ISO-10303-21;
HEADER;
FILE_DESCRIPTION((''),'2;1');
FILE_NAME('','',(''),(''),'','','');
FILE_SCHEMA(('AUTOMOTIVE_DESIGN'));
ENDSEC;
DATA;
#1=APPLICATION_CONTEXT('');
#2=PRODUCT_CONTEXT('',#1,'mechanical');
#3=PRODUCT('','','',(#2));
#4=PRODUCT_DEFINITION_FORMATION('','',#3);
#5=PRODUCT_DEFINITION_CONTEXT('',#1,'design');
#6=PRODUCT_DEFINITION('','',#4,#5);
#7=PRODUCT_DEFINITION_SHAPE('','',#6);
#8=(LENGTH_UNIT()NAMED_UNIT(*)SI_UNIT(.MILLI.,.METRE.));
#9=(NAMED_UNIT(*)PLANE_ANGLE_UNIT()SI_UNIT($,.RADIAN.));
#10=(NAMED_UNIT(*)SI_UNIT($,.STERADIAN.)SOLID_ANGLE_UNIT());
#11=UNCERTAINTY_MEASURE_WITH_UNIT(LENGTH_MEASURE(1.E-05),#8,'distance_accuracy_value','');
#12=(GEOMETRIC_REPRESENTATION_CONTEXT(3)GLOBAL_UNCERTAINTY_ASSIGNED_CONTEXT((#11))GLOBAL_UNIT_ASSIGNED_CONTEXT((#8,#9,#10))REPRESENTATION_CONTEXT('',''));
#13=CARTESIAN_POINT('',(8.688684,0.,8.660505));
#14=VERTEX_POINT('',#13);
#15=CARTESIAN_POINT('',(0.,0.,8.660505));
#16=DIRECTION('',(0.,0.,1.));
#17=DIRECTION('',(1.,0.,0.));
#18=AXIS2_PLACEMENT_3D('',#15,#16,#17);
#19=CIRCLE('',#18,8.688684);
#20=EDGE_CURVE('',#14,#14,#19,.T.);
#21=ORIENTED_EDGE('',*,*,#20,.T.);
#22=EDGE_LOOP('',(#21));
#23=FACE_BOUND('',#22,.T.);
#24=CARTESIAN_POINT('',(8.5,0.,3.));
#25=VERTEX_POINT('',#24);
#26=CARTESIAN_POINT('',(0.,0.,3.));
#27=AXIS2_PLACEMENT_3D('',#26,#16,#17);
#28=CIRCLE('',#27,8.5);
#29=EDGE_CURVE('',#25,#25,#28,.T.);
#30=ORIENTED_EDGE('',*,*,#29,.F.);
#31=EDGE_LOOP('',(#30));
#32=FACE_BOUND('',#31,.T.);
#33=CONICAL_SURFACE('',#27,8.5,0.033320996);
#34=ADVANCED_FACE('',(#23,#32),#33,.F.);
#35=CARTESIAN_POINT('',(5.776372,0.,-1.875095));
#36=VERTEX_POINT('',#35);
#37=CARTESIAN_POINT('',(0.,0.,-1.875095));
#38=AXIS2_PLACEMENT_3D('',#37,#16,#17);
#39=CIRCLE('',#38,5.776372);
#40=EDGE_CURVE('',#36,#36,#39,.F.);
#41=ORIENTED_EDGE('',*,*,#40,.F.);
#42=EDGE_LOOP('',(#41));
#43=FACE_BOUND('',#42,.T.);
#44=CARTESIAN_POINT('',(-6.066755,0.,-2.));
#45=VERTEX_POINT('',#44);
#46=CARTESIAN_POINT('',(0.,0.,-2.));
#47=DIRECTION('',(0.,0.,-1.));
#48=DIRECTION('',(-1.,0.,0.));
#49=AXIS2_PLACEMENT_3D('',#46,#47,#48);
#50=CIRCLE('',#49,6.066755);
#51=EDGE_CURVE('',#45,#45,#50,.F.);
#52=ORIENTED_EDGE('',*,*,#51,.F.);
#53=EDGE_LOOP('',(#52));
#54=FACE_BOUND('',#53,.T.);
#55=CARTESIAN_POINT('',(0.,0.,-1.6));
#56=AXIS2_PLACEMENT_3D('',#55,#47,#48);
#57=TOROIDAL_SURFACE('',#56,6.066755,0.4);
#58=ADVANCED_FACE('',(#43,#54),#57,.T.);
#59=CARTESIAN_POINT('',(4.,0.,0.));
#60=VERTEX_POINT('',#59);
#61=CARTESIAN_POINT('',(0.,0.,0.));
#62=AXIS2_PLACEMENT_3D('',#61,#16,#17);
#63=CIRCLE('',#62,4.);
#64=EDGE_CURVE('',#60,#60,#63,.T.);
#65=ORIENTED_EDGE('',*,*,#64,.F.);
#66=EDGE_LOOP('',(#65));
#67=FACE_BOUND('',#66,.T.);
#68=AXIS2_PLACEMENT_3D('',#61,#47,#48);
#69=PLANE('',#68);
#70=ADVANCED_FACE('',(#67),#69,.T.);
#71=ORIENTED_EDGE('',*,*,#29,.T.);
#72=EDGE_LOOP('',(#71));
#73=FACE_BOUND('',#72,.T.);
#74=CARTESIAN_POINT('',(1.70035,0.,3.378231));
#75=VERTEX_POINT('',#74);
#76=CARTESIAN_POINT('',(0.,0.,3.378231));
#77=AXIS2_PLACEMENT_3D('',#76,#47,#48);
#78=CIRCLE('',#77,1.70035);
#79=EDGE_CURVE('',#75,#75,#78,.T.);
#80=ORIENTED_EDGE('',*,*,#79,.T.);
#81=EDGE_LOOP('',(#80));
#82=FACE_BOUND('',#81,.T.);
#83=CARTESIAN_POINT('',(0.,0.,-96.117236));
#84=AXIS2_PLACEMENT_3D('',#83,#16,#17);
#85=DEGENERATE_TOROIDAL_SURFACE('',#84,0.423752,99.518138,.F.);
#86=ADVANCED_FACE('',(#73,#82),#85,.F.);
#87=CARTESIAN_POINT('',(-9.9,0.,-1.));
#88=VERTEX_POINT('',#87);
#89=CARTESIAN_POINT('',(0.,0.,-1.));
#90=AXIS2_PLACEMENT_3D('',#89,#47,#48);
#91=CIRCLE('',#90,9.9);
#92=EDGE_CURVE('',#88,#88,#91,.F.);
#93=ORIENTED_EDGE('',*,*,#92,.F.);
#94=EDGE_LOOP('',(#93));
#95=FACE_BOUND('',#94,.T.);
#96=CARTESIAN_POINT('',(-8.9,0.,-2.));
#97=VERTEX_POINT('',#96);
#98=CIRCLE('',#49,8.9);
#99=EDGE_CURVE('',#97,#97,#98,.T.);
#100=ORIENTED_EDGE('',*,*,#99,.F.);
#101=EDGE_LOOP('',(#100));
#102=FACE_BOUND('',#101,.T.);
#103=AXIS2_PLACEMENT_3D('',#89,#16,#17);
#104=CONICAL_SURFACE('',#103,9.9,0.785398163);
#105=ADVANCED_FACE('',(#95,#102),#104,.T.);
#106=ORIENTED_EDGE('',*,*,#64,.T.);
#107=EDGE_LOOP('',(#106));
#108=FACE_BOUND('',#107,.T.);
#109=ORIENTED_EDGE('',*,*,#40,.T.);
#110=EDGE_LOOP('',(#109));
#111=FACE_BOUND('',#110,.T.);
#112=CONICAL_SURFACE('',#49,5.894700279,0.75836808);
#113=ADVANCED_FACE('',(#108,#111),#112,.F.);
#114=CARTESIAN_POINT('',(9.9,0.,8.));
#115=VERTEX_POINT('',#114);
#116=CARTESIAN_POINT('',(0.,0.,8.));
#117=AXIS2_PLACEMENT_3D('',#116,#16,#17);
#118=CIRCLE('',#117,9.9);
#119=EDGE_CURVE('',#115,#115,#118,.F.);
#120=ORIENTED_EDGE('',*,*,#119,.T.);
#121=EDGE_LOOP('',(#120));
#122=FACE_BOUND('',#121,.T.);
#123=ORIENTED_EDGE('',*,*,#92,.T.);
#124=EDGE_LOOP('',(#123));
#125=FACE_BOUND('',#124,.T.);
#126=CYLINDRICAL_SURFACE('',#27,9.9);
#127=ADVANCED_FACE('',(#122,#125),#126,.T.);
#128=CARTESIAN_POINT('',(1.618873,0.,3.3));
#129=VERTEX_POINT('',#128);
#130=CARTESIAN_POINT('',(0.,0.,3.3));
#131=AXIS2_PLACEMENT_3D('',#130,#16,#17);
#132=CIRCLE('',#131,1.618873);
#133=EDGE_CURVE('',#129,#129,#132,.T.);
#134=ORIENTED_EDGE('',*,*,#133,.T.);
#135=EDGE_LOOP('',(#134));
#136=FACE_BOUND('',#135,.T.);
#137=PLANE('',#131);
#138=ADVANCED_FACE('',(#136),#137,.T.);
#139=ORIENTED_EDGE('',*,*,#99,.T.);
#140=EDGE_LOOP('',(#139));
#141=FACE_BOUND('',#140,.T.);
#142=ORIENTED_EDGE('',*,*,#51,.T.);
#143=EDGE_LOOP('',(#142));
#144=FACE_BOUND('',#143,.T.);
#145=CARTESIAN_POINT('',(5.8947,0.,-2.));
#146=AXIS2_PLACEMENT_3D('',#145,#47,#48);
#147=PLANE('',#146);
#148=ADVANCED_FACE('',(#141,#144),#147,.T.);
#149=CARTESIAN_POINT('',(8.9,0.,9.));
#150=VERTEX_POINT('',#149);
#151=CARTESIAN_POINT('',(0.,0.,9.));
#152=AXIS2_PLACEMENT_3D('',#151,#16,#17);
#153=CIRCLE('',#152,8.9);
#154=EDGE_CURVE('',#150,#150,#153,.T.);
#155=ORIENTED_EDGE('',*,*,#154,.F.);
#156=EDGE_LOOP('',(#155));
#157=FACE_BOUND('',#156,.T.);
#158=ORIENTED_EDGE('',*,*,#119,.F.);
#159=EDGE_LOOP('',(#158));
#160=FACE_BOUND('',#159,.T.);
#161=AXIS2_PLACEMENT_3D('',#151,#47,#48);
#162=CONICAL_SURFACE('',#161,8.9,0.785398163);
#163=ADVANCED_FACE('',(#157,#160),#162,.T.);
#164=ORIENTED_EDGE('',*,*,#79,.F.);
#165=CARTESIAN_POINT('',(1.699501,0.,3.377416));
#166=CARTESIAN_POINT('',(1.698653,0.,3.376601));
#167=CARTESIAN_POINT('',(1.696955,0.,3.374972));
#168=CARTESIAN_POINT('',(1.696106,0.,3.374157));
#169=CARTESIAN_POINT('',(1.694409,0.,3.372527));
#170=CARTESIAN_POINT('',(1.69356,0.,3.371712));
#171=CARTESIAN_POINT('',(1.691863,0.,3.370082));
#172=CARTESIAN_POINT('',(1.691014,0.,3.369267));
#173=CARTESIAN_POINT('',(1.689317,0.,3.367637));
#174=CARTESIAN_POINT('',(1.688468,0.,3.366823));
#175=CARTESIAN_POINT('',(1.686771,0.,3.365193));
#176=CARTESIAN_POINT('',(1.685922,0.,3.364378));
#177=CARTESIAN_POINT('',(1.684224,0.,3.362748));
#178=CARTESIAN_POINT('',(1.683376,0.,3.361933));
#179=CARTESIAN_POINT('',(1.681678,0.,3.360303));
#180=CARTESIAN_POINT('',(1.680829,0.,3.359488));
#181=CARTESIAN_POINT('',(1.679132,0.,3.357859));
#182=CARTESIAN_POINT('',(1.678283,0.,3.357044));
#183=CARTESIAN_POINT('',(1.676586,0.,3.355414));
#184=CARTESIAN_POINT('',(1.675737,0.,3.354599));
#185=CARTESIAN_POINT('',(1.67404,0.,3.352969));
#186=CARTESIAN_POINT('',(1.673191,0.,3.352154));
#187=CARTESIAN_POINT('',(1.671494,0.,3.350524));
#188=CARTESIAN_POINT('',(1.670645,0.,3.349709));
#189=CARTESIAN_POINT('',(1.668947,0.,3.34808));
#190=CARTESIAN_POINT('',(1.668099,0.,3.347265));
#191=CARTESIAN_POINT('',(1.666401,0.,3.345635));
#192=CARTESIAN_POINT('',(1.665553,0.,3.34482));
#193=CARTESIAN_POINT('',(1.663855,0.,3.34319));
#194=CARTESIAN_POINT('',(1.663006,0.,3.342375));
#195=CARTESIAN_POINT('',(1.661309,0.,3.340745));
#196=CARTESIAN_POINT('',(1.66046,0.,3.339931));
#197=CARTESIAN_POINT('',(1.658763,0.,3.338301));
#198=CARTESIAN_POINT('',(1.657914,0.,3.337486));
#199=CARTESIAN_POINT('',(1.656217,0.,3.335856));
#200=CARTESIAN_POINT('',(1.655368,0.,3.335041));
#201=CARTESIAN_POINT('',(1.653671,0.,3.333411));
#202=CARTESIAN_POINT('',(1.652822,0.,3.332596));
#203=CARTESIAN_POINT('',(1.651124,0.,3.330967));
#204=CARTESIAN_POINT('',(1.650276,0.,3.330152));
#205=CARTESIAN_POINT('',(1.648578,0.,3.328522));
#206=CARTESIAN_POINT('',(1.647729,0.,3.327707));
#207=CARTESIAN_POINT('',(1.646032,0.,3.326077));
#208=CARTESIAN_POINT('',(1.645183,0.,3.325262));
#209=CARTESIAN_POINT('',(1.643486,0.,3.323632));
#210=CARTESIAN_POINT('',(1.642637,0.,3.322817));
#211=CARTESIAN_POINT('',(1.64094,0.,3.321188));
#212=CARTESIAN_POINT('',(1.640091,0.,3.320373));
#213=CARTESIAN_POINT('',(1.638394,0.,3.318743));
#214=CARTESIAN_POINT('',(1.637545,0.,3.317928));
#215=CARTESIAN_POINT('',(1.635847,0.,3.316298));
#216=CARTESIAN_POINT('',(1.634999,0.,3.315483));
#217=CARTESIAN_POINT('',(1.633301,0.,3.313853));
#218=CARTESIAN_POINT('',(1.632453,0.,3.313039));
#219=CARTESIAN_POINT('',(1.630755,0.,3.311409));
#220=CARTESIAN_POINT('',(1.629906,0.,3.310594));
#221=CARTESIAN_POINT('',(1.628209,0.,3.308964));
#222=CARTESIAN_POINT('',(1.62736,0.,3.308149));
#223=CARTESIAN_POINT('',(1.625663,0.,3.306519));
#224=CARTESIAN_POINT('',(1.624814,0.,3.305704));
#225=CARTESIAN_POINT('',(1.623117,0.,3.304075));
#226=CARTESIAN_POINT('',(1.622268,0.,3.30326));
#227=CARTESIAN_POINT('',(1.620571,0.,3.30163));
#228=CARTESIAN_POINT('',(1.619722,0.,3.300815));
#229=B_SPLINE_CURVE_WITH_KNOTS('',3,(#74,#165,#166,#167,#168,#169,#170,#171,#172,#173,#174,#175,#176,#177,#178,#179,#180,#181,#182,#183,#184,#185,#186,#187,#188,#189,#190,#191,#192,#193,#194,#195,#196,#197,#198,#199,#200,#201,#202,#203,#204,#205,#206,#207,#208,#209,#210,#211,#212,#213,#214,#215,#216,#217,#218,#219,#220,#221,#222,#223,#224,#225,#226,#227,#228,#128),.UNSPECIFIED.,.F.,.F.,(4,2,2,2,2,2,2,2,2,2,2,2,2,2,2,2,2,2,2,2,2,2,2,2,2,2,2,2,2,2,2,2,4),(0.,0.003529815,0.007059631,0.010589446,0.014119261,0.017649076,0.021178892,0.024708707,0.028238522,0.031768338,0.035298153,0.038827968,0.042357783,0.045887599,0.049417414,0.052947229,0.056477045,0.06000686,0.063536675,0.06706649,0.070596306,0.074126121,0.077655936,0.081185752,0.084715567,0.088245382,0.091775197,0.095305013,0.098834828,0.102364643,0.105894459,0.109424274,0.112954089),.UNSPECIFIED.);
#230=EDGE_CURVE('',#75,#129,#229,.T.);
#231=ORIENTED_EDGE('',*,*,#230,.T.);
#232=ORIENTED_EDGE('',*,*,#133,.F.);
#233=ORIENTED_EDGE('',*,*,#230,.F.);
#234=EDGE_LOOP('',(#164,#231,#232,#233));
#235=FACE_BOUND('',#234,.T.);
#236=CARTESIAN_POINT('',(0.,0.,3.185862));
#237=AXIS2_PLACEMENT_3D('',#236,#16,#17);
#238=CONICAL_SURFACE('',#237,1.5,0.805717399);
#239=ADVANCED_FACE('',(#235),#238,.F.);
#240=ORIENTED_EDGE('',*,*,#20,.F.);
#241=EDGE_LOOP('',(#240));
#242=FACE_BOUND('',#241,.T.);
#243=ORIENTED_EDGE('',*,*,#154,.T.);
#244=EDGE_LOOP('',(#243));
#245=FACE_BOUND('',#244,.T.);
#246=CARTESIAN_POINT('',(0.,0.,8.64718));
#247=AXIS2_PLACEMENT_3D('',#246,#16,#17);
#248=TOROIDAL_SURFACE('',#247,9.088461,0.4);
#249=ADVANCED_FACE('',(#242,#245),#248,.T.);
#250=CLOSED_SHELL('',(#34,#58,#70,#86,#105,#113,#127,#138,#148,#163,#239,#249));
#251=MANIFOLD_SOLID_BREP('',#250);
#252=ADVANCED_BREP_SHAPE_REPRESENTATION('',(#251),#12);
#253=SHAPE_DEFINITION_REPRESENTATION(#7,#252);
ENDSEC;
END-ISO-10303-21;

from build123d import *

# Parameters (mm, degrees)
CHAMFER_1_SIZE      = 1
FILLET_1_R          = 0.4
SKETCH_2_R          = 1.5
CUT_EXTRUDE_1_DEPTH = 6.7
CHAMFER_2_SIZE      = 0.2
CHAMFER_2_SIZE_2    = 0.196243157


with BuildPart() as part:
    # 스케치1 → 회전1 (revolve)
    with BuildSketch(Plane(origin=(0, 0, 0), x_dir=(1, 0, 0), z_dir=(0, 1, 0))):
        with BuildLine():
            Line((0, 0), (4, 0))
            Line((4, 0), (5.894700278586023, 2))
            Line((5.894700278586023, 2), (9.9, 2))
            Line((9.9, 2), (9.900000000000002, -9))
            Line((9.900000000000002, -9), (8.700000000000008, -9))
            Line((8.700000000000008, -9), (8.5, -2.999999999999999))
            ThreePointArc((8.5, -2.999999999999999), (4.254277259758997, -3.290891769878769), (0, -3.4000000000000004))
            Line((0, -3.4000000000000004), (0, -3))
            Line((0, -3), (0, 0))
        make_face()
    revolve(axis=Axis((0, 0, 3), (0, 0, -1)))

    # 모따기1
    chamfer_1_edges = [part.edges().sort_by_distance(p)[0] for p in [
        (-9.900000000000002, -1.21e-15, 9),
        (-9.9, -1.21e-15, -2),
    ]]
    chamfer(chamfer_1_edges, length=CHAMFER_1_SIZE)

    # 필렛1
    # the kernel refuses this fillet: 0.4 mm, written as the material it takes off along each edge
    with BuildSketch(Plane(origin=(0, 0, 9), x_dir=(1, 0, 0), z_dir=(0, 1, 0))) as fillet_1_piece_1:
        with BuildLine():
            CenterArc((9.088461478811075, 0.35282045151089214), FILLET_1_R, 181.90915243299636, 59.981635971248124)
            Line((8.688683516019413, 0.3394945194178369), (8.68068795676358, 0.33922800077597515))
            Line((8.68068795676358, 0.33922800077597515), (8.692004440744174, -0.00026651864186178))
            Line((8.692004440744174, -0.00026651864186178), (8.700000000000008, -0.00799999999999912))
            ThreePointArc((8.700000000000008, -0.00799999999999912), (8.800000000000006, -0.00799999999999912), (8.896230770423783, -0.00705640903021099))
            Line((8.896230770423783, -0.00705640903021099), (8.900000000000004, 7.11e-15))
        make_face()
    revolve(axis=Axis((0, 0, 9), (0, 0, -1)), mode=Mode.SUBTRACT)
    with BuildSketch(Plane(origin=(0, 0, -2), x_dir=(1, 0, 0), z_dir=(0, 1, 0))) as fillet_1_piece_2:
        with BuildLine():
            CenterArc((5.894700278586023 + FILLET_1_R * 0.430137532673, -FILLET_1_R), FILLET_1_R, 90, 46.54870972712371)
            Line((5.894700278586023 - FILLET_1_R * 0.295821777418, -FILLET_1_R * 0.312262346464), (5.894700278586023 - FILLET_1_R * 0.31034096362, -FILLET_1_R * 0.298507593393))
            Line((5.894700278586023 - FILLET_1_R * 0.31034096362, -FILLET_1_R * 0.298507593393), (5.894700278586023 - FILLET_1_R * 0.00860275065346, FILLET_1_R * 0.02))
            Line((5.894700278586023 - FILLET_1_R * 0.00860275065346, FILLET_1_R * 0.02), (5.894700278586023 + FILLET_1_R * 0.430137532673, FILLET_1_R * 0.02))
            Line((5.894700278586023 + FILLET_1_R * 0.430137532673, FILLET_1_R * 0.02), (5.894700278586023 + FILLET_1_R * 0.430137532673, 0))
        make_face()
    revolve(axis=Axis((0, 0, -2), (0, 0, -1)), mode=Mode.SUBTRACT)

    # 스케치2 → 컷-돌출1 (cut)
    with BuildSketch(Plane.XY.offset(10)):
        Circle(SKETCH_2_R)
    extrude(amount=-CUT_EXTRUDE_1_DEPTH, mode=Mode.SUBTRACT)

    # 모따기2
    # the kernel refuses this chamfer: 0.2, 0.196243157 mm, written as the material it takes off along each edge
    with BuildSketch(Plane(origin=(6.4671513e-10, -1.09559634e-09, 3.3823067338827144), x_dir=(1.0, 7.303978568468729e-10, 0), z_dir=(7.303978568468729e-10, -1.0, 0))) as chamfer_2_piece_1_section:
        with BuildLine():
            Line((1.4999999993532855 + CHAMFER_2_SIZE * 0.999793216119, -CHAMFER_2_SIZE * 0.0203353141858), (1.4999999993532855 + CHAMFER_2_SIZE_2 * 6.59095382194e-09, -CHAMFER_2_SIZE_2 * 1.00000000151))
            Line((1.4999999993532855 + CHAMFER_2_SIZE_2 * 6.59095382194e-09, -CHAMFER_2_SIZE_2 * 1.00000000151), (1.4999999993532855, 0))
            ThreePointArc((1.4999999993532855, 0), (1.6028067115105318, -0.00204082683161744), (1.4999999993532855 + CHAMFER_2_SIZE * 0.999793216119, -CHAMFER_2_SIZE * 0.0203353141858))
        make_face()
    chamfer_2_piece_1 = revolve(axis=Axis((6.4671513e-10, -1.09559634e-09, 3.3823067338827144), (0, 0, 1)), mode=Mode.PRIVATE)
    chamfer_2_piece_1 = split(chamfer_2_piece_1, bisect_by=Plane(origin=(6.4671513e-10, -1.09559634e-09, 3.3), z_dir=(0, 0, 1)), keep=Keep.TOP, mode=Mode.PRIVATE)
    add(chamfer_2_piece_1, mode=Mode.SUBTRACT)


solid = part.part
